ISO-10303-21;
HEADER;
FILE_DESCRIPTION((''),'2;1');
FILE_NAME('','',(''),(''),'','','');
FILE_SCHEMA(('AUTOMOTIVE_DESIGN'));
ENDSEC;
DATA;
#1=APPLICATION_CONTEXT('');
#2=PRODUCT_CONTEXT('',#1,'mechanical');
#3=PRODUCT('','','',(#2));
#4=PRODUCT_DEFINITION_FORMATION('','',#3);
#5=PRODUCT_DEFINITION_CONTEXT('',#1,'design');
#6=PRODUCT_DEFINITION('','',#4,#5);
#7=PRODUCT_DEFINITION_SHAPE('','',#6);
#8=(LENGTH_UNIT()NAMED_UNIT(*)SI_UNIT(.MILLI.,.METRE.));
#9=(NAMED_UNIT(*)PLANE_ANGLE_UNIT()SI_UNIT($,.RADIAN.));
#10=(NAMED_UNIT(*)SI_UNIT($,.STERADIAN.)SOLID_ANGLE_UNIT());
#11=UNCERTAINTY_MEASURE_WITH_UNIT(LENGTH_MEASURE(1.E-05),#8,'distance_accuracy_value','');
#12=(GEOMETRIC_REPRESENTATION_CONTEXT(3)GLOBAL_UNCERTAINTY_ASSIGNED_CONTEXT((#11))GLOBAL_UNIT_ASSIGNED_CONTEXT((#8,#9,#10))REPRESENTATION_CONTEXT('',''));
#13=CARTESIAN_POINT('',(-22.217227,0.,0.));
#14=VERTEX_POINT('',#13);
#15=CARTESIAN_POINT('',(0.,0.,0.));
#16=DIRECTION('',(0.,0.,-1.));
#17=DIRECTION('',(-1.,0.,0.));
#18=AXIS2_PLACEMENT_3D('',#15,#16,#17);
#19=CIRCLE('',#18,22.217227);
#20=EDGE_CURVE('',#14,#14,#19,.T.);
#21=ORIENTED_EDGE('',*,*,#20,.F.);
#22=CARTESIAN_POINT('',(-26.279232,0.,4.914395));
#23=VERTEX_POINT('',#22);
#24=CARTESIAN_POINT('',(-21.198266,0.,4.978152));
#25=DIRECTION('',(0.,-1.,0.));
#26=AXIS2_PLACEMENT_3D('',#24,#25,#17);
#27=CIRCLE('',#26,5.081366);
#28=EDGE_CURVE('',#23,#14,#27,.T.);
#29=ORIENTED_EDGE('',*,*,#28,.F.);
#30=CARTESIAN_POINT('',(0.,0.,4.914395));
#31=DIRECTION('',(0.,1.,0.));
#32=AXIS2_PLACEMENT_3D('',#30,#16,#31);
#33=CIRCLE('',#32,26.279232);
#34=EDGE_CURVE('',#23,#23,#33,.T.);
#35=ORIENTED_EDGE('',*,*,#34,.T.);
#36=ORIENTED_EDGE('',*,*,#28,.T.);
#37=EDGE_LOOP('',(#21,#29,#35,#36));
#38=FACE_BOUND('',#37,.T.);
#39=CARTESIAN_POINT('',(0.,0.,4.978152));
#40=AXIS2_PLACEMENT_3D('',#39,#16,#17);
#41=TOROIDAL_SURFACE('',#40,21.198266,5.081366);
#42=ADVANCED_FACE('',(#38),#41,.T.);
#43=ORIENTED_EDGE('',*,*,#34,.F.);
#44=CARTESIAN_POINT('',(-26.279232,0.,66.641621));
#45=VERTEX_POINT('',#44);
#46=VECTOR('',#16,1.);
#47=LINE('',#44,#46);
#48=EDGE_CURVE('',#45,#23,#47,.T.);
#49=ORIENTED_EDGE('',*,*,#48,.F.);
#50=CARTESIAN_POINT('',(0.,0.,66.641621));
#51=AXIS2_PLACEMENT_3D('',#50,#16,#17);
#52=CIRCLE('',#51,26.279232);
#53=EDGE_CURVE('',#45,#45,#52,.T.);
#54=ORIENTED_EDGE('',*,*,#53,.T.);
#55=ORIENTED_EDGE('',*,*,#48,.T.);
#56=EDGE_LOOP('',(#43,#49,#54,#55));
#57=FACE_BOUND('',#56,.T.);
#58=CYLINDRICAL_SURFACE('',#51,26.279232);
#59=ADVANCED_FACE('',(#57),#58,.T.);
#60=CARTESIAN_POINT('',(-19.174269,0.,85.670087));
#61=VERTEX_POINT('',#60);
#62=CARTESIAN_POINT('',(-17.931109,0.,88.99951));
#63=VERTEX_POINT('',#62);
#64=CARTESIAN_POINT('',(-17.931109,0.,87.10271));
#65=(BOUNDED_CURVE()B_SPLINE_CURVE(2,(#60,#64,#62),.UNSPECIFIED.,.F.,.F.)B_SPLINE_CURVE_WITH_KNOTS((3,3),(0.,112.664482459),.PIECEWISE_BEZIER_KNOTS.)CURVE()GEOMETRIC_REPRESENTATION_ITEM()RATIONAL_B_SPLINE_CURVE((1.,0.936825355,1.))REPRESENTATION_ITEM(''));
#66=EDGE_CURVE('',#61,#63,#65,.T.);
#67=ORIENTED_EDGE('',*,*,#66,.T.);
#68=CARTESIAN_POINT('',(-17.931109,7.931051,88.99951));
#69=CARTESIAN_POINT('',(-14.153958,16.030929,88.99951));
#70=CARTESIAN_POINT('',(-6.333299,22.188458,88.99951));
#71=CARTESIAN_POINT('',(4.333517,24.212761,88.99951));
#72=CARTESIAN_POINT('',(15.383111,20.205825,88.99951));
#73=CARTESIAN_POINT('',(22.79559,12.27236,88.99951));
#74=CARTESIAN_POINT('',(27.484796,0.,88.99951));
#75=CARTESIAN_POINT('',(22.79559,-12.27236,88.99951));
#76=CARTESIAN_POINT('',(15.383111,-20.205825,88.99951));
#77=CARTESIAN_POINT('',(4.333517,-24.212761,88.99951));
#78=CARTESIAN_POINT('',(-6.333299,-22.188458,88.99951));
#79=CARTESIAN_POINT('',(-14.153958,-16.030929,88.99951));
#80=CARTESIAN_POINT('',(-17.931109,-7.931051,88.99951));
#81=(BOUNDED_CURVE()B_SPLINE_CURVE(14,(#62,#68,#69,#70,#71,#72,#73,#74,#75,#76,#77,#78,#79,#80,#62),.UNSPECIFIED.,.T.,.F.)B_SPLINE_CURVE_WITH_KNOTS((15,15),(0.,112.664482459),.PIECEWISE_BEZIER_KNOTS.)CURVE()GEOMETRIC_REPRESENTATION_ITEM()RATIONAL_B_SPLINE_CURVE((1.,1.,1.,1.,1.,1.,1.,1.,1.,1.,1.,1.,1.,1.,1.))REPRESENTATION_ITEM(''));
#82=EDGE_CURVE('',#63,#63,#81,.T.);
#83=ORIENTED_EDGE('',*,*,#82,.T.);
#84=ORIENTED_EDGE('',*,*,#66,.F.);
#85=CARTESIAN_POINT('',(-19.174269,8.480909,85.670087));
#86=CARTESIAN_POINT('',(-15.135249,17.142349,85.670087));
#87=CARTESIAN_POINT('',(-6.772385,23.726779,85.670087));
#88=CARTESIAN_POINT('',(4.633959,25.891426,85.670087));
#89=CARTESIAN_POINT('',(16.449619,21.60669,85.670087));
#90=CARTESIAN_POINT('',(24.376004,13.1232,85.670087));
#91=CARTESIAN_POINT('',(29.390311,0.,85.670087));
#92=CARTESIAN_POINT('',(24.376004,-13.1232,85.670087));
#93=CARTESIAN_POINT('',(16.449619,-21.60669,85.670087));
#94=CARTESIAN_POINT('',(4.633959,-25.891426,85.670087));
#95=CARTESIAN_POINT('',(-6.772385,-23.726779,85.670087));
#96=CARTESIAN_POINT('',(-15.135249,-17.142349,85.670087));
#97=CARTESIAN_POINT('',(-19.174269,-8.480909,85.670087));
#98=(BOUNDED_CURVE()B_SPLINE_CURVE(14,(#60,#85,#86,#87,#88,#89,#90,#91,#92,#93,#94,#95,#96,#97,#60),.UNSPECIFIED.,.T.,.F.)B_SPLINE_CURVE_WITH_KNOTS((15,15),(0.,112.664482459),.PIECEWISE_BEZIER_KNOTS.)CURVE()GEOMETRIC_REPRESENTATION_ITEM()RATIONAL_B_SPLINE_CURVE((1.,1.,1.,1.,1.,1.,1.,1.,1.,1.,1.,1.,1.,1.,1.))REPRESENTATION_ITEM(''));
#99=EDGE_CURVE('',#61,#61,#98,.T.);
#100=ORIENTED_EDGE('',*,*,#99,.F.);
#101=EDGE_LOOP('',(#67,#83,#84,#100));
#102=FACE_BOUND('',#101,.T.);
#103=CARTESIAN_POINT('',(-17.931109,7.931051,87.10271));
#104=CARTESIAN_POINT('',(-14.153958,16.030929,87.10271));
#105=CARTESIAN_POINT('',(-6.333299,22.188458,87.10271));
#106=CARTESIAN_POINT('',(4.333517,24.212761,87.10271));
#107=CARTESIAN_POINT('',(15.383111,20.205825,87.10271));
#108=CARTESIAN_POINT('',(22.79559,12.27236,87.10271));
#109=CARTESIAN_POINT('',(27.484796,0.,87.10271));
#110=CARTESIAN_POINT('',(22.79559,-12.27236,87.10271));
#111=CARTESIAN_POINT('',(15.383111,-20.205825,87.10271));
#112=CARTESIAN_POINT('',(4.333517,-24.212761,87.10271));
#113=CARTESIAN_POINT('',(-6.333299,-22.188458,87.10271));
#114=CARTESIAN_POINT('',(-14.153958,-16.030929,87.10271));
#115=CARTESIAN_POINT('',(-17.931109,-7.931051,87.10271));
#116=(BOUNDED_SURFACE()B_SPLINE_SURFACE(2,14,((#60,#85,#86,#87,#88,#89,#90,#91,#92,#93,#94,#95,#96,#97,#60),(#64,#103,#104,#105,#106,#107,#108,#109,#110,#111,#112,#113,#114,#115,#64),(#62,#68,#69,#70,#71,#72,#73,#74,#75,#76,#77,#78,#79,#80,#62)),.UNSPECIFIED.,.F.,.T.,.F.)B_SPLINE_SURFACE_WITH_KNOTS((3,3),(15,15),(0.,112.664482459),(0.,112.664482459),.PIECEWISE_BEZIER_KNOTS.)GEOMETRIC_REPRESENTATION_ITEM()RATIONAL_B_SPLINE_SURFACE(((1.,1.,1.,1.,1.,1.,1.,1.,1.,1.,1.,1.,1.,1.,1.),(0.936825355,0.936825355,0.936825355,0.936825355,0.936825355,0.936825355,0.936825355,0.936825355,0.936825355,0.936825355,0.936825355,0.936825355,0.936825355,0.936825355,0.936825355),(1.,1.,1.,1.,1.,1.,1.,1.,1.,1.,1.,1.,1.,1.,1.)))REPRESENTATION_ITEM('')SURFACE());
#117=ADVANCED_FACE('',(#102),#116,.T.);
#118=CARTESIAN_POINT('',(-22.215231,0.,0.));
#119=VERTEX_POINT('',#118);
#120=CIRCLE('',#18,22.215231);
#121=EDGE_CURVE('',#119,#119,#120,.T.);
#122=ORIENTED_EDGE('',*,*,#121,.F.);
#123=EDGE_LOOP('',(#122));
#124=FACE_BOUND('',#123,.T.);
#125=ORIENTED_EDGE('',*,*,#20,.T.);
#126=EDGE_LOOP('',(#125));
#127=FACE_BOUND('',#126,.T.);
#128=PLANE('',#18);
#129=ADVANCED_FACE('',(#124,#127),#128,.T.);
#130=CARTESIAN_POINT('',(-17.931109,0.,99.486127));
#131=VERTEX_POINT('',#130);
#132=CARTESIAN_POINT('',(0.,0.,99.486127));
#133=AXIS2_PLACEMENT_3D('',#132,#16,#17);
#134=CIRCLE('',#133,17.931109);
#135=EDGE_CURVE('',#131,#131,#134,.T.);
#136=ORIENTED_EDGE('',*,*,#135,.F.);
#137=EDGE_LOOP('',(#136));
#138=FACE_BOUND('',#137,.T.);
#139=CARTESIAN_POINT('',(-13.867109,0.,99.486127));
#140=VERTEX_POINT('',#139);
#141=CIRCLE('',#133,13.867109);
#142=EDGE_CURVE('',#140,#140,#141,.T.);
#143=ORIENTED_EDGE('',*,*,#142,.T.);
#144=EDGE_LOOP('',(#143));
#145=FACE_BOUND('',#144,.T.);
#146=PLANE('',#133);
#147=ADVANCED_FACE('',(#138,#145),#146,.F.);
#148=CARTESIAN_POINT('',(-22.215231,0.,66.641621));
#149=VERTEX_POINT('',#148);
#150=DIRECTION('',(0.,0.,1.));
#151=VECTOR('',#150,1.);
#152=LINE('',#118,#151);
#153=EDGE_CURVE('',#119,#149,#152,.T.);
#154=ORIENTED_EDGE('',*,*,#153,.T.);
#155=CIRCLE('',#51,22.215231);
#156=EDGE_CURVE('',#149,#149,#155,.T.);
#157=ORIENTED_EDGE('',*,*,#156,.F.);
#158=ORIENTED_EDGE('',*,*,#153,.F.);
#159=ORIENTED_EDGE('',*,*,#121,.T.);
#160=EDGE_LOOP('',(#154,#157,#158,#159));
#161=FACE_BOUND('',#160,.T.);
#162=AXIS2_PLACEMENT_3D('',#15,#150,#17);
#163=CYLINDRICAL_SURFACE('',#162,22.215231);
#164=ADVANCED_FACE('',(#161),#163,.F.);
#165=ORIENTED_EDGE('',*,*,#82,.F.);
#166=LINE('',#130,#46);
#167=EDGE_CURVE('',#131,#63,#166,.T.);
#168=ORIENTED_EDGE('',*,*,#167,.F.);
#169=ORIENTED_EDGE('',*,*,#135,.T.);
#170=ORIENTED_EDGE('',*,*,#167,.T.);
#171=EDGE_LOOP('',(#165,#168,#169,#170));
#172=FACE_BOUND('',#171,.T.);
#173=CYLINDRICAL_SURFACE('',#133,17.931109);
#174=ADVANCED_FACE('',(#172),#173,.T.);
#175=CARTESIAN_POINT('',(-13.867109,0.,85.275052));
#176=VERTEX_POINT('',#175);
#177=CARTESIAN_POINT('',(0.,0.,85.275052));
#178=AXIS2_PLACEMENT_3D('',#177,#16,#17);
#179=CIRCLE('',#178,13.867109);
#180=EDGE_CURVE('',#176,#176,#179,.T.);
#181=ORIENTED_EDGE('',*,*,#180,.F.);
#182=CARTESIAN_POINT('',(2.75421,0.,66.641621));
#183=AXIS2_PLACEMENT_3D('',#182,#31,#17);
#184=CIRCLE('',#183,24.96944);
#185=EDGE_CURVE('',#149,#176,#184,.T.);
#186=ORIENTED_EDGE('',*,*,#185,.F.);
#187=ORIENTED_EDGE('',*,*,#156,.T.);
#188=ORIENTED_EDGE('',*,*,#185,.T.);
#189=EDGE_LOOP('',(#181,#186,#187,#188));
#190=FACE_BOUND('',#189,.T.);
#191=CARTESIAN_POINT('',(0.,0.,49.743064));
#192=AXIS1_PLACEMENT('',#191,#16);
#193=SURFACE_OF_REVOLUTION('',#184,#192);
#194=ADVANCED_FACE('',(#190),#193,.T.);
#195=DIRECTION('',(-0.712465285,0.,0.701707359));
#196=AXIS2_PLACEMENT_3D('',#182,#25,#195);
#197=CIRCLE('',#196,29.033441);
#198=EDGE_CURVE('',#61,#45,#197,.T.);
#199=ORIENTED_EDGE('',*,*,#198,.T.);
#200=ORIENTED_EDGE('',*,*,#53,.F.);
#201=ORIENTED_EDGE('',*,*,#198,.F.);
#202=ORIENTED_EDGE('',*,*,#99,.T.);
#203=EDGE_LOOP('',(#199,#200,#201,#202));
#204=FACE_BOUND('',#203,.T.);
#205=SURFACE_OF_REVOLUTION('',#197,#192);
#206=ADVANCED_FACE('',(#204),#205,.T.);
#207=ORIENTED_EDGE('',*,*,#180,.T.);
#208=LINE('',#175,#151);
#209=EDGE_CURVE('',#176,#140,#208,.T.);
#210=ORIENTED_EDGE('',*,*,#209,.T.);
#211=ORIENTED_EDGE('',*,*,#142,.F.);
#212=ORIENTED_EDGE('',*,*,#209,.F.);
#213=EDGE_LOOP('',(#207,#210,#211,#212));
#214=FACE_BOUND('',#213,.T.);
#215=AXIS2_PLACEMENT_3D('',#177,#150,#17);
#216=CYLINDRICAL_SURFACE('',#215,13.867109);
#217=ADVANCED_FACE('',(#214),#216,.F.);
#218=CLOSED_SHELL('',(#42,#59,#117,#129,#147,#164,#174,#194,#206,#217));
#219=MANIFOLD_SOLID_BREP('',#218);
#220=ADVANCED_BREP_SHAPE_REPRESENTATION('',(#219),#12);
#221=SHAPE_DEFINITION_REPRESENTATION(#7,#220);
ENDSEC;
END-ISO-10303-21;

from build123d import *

# Parameters (mm, degrees)
F3_R = 5.08


# Not quite as in the source:
# - a fillet or chamfer that OpenCascade refuses, or shapes differently, is made with other operations: its cross-section is extruded or revolved along the edge and cut away or added


with BuildPart() as f1:
    # F0 (on Front) → F1 (revolve)
    with BuildSketch(Plane.XZ):
        with BuildLine():
            Line((-26.2792315334, 0), (-22.2152307564, 0))
            Line((-22.2152307564, 0), (-22.2152307564, 66.6416212916))
            ThreePointArc((-22.2152307564, 66.6416212916), (-20.0328257832, 76.8506354666), (-13.8671085173, 85.2750519145))
            Line((-13.8671085173, 85.2750519145), (-13.8671085173, 99.4861274958))
            Line((-13.8671085173, 99.4861274958), (-17.9311092943, 99.4861274958))
            Line((-17.9311092943, 99.4861274958), (-17.9311092943, 87.0146006346))
            ThreePointArc((-17.9311092943, 87.0146006346), (-24.1112579421, 77.6501342728), (-26.2792315334, 66.6416212916))
            Line((-26.2792315334, 66.6416212916), (-26.2792315334, 0))
        make_face()
    revolve(axis=Axis((0, 0, 49.7430637479), (0, 0, -1)))

    # F2: fillet of radius 5.08 on 1 edges, made by hand

    # F2_s1 → F2_t2 (revolve, cut)
    with BuildSketch(Plane.XZ):
        with BuildLine():
            ThreePointArc((-26.2796315334, 4.9781517325), (-25.134523883, 1.7647190024), (-22.2153108172, -0.0003919059))
            Line((-22.2153108172, -0.0003919059), (-22.3170153141, -0.4982462698))
            ThreePointArc((-22.3170153141, -0.4982462698), (-24.2472711753, -0.5081365685), (-26.2792315334, -0.5081365685))
            Line((-26.2792315334, -0.5081365685), (-26.787368102, 0))
            ThreePointArc((-26.787368102, 0), (-26.787368102, 2.4890758662), (-26.787768102, 4.9781517325))
            Line((-26.787768102, 4.9781517325), (-26.2796315334, 4.9781517325))
        make_face()
    revolve(axis=Axis((0, 0, 0), (0, 0, -1)), mode=Mode.SUBTRACT)

    # F3
    f3_edges = [f1.edges().sort_by_distance(p)[0] for p in [
        (17.931109, 0, 87.014601),
    ]]
    fillet(f3_edges, radius=F3_R)


solid = f1.part
